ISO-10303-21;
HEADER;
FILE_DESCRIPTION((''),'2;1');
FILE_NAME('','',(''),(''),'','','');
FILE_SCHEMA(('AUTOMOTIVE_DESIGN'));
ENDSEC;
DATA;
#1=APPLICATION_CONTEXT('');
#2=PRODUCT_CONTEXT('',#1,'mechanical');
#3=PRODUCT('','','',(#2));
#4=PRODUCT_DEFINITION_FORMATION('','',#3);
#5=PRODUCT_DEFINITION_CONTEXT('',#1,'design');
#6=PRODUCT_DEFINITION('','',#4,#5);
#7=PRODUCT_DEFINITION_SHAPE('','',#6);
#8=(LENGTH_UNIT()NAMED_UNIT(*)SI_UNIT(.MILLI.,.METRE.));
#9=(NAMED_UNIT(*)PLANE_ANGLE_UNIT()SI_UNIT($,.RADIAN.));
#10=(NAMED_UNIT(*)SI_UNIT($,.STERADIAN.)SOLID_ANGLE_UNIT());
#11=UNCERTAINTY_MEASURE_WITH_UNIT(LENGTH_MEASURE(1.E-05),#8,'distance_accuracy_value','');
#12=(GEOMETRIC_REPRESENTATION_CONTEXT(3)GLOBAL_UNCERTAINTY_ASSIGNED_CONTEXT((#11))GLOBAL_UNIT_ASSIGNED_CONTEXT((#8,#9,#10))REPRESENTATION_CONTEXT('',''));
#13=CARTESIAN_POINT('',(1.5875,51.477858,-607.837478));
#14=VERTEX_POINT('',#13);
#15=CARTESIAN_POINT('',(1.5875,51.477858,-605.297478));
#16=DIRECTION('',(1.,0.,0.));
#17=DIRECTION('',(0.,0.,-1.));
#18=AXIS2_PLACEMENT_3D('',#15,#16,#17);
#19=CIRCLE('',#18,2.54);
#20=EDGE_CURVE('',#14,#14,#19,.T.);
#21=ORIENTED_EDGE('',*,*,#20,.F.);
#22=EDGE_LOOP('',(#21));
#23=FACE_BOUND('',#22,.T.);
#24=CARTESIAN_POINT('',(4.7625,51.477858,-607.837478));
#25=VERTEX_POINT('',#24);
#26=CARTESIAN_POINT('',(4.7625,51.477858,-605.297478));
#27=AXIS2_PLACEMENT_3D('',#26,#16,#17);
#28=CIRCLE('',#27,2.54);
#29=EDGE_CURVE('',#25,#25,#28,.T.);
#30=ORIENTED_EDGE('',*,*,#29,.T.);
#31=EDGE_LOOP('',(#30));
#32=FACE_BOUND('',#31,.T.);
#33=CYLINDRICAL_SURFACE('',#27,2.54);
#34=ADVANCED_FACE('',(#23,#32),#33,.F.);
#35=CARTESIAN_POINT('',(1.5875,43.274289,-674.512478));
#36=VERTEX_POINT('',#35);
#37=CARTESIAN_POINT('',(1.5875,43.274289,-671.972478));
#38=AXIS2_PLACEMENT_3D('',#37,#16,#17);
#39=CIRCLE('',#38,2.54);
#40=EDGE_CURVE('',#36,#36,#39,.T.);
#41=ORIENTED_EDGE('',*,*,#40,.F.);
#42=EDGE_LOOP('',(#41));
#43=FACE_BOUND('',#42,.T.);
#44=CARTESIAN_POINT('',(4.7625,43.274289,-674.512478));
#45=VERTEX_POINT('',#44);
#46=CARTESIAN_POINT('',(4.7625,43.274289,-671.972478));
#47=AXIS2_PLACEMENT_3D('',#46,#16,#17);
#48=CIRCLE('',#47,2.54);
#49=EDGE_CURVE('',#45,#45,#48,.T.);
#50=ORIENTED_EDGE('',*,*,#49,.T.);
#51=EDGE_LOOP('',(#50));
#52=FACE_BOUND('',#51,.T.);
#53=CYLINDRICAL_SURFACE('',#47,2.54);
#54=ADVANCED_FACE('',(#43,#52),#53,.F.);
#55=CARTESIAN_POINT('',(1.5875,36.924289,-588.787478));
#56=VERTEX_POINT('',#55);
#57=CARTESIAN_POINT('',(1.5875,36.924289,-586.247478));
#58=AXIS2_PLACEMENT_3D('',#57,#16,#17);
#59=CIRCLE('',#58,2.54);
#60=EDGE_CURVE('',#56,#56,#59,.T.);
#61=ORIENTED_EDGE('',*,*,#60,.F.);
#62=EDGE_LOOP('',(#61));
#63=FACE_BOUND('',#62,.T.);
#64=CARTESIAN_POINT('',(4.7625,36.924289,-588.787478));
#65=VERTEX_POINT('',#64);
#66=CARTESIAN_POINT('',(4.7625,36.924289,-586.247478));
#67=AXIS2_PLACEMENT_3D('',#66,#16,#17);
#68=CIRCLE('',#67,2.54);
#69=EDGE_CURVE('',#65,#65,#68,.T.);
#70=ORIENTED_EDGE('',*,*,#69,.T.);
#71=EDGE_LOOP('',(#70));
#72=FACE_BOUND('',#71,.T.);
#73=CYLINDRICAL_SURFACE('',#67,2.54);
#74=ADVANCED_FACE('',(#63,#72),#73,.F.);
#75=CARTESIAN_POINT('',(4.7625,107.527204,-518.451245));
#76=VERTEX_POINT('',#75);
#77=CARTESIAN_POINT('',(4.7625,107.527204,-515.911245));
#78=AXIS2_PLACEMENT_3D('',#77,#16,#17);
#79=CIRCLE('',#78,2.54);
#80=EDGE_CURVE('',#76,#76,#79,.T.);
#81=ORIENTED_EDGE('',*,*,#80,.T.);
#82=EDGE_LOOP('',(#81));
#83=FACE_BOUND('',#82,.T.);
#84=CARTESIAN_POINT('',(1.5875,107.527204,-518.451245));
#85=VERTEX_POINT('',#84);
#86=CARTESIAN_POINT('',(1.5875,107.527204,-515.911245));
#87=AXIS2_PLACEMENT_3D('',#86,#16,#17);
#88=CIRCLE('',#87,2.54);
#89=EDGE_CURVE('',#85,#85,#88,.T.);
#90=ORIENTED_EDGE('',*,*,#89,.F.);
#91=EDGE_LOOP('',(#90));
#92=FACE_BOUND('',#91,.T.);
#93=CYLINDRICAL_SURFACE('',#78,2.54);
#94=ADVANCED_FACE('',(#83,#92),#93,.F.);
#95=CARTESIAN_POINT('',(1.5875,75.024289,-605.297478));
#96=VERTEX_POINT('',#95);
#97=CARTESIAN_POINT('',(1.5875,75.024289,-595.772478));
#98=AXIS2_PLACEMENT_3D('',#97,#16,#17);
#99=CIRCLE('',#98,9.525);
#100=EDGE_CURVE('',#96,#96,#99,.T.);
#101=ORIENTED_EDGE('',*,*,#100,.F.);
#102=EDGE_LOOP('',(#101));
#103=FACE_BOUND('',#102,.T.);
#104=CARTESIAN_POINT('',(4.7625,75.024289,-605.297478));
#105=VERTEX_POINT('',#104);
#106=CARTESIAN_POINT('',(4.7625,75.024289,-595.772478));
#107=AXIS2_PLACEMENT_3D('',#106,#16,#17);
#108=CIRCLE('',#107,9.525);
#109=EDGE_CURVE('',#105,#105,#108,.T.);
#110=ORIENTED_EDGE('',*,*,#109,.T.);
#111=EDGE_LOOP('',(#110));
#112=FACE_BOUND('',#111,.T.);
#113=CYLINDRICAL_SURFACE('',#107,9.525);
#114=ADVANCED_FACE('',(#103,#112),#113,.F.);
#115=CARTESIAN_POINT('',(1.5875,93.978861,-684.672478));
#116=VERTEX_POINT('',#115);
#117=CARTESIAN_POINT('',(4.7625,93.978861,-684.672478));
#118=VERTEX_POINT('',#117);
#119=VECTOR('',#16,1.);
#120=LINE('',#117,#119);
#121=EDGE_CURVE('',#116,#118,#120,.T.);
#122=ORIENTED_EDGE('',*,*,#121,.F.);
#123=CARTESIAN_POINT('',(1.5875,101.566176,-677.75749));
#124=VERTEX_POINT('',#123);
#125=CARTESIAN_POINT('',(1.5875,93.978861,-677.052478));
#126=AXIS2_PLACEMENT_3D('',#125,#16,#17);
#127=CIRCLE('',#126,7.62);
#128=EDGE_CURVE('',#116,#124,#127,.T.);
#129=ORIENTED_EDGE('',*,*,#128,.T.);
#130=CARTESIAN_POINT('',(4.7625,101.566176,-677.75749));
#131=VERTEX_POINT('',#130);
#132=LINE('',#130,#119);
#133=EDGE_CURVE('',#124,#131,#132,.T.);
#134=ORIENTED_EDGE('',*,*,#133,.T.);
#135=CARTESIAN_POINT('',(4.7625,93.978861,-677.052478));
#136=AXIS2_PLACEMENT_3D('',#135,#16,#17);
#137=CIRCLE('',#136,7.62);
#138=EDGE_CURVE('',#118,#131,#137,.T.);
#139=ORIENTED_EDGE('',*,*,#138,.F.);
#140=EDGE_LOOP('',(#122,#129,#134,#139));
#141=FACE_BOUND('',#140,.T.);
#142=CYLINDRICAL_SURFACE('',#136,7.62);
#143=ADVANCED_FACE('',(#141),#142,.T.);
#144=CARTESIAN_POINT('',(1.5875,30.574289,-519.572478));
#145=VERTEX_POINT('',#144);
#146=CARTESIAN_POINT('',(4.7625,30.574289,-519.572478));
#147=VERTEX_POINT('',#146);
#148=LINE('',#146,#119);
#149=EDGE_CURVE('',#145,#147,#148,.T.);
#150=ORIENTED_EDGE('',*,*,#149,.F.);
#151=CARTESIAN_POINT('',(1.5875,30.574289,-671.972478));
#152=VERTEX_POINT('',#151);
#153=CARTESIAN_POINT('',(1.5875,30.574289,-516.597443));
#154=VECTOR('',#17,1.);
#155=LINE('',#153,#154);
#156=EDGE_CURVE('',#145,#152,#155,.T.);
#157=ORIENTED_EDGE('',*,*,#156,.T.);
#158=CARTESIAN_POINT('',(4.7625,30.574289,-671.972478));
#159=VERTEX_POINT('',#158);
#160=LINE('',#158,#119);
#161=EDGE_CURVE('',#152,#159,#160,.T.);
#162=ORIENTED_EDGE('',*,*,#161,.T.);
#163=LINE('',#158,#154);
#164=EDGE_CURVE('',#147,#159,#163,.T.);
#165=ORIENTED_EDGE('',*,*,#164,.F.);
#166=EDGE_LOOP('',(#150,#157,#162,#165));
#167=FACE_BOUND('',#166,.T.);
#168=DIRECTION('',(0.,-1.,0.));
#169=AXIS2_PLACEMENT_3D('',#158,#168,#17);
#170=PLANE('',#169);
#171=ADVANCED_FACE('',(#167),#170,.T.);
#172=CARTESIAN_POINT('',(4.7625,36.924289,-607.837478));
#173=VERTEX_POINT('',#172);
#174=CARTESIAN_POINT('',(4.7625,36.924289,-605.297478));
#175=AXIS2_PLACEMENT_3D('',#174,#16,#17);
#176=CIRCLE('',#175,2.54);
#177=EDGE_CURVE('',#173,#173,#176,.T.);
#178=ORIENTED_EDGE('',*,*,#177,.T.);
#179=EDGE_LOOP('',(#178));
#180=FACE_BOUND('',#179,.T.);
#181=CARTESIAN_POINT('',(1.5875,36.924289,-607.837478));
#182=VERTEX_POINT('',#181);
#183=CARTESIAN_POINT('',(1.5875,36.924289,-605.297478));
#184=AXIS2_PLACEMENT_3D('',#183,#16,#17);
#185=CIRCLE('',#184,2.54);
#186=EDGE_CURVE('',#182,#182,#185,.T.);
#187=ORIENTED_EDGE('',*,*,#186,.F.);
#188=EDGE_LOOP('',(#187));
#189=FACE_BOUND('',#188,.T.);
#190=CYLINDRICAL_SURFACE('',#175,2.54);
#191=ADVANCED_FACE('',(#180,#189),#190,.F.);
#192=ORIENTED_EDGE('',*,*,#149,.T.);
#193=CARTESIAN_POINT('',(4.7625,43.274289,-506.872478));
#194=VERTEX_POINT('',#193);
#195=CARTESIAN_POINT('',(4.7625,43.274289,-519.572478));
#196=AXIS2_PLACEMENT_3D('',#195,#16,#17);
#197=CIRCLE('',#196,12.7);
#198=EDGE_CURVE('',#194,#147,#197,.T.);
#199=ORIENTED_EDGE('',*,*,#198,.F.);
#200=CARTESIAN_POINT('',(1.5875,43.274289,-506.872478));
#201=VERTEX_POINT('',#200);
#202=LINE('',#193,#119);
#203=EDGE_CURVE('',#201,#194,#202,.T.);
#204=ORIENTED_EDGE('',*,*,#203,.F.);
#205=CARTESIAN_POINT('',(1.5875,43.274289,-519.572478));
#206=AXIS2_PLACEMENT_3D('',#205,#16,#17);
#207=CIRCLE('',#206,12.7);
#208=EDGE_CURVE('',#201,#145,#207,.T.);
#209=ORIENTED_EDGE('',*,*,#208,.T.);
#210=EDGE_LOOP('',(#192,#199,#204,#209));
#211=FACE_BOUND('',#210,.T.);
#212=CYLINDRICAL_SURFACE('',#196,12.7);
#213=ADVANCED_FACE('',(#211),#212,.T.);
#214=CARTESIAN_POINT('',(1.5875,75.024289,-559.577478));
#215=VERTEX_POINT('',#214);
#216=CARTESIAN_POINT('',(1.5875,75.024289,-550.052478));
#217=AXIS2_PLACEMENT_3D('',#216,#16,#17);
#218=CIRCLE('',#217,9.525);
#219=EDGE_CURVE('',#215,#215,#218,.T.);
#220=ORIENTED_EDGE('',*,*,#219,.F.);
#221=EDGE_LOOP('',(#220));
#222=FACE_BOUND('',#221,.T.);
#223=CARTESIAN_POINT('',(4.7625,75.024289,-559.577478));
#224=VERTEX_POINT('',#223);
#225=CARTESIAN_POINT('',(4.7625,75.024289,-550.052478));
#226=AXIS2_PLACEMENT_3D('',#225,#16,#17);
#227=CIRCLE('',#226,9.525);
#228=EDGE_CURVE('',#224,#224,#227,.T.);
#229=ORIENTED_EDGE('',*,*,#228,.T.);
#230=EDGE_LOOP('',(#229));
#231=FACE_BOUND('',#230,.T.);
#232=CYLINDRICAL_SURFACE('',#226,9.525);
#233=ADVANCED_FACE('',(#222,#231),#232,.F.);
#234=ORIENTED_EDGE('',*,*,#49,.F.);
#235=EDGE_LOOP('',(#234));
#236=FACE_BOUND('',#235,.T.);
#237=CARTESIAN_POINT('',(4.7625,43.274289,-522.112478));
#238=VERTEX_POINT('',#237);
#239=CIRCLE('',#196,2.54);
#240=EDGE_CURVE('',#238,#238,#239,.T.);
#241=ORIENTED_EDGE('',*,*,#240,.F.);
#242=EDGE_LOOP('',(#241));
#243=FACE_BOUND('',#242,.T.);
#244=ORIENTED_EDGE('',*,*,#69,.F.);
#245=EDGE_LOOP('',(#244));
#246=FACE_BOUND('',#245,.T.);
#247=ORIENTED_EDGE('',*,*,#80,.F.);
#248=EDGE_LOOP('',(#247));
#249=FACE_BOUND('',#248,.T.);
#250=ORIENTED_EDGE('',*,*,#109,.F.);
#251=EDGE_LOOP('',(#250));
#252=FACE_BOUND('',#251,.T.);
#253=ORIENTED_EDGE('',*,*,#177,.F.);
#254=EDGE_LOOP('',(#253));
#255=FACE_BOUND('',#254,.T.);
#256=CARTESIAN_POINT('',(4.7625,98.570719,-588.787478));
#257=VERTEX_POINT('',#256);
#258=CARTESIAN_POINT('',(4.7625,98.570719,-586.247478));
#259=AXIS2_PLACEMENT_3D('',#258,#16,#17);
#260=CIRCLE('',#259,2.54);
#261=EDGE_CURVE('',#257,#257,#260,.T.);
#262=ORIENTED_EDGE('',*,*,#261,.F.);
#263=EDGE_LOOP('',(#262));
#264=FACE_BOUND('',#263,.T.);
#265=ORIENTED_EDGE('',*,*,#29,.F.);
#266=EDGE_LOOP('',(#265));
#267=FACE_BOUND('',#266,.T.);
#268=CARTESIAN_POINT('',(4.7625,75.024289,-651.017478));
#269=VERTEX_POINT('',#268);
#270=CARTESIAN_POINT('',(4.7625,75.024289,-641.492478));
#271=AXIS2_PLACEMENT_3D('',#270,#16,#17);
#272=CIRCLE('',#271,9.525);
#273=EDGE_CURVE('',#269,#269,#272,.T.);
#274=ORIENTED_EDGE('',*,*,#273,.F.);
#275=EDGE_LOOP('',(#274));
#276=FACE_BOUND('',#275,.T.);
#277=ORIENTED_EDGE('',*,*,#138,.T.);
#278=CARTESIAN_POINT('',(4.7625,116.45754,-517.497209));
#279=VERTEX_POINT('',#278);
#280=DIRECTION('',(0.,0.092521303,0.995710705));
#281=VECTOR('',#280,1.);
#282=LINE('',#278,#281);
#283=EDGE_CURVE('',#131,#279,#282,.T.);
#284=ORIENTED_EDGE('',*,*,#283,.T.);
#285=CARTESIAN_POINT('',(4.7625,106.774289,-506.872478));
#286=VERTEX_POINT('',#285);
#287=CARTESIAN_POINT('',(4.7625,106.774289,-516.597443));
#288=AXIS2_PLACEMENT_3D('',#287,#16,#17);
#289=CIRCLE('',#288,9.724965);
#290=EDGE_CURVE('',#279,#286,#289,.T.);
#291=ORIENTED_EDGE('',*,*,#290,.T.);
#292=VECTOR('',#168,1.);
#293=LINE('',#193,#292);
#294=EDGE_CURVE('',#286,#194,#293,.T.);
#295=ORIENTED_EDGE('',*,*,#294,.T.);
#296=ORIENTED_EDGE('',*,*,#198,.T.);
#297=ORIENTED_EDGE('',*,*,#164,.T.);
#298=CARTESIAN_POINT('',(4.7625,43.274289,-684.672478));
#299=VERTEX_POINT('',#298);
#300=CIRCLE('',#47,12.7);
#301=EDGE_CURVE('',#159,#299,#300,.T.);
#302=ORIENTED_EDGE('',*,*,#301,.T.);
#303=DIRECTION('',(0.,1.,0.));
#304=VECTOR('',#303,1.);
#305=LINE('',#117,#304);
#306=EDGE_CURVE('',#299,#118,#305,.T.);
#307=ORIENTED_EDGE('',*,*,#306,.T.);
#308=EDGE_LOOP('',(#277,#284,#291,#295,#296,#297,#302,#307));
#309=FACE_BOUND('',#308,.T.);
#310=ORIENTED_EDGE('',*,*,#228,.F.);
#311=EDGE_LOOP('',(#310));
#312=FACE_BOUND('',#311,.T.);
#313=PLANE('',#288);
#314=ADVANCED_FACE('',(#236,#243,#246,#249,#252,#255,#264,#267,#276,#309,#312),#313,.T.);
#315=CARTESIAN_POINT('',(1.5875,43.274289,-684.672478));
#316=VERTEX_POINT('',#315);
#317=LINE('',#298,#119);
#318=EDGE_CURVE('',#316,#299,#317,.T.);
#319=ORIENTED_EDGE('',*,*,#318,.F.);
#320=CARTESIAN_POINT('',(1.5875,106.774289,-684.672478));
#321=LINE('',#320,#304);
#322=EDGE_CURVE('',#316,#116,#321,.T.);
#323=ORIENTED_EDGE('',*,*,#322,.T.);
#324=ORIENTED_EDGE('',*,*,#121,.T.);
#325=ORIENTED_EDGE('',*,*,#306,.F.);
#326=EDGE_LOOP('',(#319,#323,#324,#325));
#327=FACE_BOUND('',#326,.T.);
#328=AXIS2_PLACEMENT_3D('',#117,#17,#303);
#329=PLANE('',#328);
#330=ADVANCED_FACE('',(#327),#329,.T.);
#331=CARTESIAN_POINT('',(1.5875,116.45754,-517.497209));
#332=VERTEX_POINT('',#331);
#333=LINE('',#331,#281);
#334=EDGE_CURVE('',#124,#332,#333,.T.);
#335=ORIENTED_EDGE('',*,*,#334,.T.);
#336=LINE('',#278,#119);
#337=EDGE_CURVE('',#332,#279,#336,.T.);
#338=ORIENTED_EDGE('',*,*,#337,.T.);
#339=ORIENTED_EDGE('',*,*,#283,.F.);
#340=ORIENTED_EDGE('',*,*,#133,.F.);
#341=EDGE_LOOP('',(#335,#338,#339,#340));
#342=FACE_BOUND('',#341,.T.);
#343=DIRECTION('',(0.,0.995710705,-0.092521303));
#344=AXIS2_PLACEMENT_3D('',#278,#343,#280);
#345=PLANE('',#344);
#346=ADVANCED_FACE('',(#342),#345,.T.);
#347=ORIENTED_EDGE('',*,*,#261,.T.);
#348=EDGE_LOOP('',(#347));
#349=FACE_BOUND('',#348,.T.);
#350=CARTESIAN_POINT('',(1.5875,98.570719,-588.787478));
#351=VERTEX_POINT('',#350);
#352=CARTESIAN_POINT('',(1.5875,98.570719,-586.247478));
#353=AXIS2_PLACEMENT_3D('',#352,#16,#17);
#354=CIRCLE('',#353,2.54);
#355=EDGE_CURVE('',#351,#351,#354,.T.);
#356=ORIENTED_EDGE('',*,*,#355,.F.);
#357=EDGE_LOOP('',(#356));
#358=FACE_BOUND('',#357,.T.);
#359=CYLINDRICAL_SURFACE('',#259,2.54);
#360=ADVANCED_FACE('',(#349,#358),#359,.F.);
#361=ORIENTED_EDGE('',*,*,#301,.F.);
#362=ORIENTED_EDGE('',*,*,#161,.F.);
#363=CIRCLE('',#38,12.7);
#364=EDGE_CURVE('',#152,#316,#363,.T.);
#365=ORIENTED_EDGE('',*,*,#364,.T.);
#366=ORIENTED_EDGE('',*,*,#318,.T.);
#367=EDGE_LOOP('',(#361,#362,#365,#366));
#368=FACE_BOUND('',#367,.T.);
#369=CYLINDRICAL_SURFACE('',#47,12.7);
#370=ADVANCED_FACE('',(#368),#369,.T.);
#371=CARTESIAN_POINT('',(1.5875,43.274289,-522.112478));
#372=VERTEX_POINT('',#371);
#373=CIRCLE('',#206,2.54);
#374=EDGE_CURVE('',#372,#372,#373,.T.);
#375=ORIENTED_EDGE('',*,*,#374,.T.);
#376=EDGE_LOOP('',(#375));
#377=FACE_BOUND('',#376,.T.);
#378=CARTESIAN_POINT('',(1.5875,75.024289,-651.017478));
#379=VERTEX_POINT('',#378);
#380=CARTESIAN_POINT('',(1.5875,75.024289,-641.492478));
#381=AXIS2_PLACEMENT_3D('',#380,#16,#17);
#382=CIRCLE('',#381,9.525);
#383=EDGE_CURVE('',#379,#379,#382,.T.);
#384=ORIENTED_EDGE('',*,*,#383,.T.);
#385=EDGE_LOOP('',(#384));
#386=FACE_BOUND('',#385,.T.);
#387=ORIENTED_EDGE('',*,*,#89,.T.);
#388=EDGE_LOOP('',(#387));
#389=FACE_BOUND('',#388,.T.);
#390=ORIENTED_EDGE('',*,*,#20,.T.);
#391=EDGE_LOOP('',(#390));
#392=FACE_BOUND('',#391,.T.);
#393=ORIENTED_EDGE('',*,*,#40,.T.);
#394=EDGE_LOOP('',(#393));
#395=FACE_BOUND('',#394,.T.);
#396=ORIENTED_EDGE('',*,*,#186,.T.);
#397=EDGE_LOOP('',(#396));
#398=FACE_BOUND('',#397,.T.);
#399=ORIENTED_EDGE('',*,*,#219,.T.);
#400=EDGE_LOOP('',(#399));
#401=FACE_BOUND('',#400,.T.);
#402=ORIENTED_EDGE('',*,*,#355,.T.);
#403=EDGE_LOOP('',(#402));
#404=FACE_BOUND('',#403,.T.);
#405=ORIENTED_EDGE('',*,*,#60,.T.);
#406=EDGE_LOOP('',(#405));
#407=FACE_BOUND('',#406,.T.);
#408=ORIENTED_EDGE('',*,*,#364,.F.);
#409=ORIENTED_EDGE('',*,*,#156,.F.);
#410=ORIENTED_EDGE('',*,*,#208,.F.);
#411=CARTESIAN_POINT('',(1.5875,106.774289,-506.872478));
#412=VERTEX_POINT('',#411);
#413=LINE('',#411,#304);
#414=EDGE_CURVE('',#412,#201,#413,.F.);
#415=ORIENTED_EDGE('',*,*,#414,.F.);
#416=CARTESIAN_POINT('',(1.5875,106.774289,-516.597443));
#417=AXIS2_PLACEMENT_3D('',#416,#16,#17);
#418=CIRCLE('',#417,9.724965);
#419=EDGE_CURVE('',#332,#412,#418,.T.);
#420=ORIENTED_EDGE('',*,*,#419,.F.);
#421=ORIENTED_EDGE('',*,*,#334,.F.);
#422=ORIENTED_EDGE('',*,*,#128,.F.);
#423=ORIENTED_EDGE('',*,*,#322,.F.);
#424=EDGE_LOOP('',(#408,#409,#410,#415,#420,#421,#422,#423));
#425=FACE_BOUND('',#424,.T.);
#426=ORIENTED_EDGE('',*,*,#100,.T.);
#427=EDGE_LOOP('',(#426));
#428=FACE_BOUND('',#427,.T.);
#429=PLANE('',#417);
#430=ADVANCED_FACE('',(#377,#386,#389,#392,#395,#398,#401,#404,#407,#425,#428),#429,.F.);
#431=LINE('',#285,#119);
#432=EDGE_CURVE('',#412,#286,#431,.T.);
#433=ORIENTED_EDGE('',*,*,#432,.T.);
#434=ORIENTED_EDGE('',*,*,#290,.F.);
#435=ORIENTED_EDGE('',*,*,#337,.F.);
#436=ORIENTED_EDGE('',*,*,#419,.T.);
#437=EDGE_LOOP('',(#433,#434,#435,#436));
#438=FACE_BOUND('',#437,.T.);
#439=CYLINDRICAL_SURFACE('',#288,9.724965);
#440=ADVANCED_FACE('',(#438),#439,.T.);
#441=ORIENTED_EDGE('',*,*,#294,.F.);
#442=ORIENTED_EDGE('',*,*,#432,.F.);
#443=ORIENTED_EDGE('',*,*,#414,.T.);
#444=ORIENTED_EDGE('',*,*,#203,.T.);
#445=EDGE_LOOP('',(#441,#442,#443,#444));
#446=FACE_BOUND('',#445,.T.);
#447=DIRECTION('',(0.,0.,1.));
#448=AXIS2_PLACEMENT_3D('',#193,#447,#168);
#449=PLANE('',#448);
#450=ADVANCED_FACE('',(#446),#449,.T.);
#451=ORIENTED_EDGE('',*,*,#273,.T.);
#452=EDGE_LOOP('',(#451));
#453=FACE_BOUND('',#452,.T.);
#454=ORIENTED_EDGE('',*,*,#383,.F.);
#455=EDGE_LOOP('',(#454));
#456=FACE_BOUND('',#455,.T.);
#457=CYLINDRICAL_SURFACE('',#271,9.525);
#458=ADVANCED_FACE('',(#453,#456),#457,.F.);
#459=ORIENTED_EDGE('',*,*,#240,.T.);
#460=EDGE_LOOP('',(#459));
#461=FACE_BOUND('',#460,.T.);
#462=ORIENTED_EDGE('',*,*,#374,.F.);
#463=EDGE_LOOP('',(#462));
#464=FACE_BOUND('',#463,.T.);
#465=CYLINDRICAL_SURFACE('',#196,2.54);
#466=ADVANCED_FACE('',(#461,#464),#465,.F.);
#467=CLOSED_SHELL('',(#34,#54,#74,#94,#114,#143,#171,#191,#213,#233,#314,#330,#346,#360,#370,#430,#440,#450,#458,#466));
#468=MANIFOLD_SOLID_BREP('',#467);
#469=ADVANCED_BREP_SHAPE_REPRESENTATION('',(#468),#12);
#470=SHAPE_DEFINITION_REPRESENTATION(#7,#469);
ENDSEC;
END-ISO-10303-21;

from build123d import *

# Parameters (mm, degrees)
SKETCH1_R                  = 2.54
SKETCH1_R_2                = 9.525
BOSS_EXTRUDE1_DEPTH        = 4.7625
CONVERT_SOLID1_OUTLINE_R   = 2.54
CONVERT_SOLID1_OUTLINE_R_2 = 9.525
CONVERT_SOLID1_DEPTH       = 1.5875


# Read off the part's stored shape, not the designer's step: Convert-Solid1
with BuildPart() as part:
    # Sketch1 → Boss-Extrude1 (new body)
    with BuildSketch(Plane(origin=(0, 0, 0), x_dir=(0, 0, -1), z_dir=(1, 0, 0))):
        with BuildLine():
            Line((517.497208961, 116.457539853), (677.757490375, 101.56617639))
            ThreePointArc((677.757490375, 101.56617639), (682.684377991, 99.111706327), (684.672478048, 93.978860817))
            Line((684.672478048, 93.978860817), (684.672478048, 43.274288567))
            ThreePointArc((684.672478048, 43.274288567), (680.952734169, 34.294032445), (671.972478048, 30.574288567))
            Line((671.972478048, 30.574288567), (519.572478048, 30.574288567))
            ThreePointArc((519.572478048, 30.574288567), (510.592221927, 34.294032445), (506.872478048, 43.274288567))
            Line((506.872478048, 43.274288567), (506.872478048, 106.774288567))
            ThreePointArc((506.872478048, 106.774288567), (510.046689227, 113.961956173), (517.497208961, 116.457539853))
        make_face()
        with Locations(Location((515.911244675, 107.527203865, 0), (0, 0, 180))):
            Circle(SKETCH1_R, mode=Mode.SUBTRACT)
        with Locations(Location((550.052478048, 75.024288567, 0), (0, 0, 180))):
            Circle(SKETCH1_R_2, mode=Mode.SUBTRACT)
        with Locations(Location((595.772478048, 75.024288567, 0), (0, 0, 180))):
            Circle(SKETCH1_R_2, mode=Mode.SUBTRACT)
        with Locations(Location((605.297478048, 51.47785837, 0), (0, 0, 180))):
            Circle(SKETCH1_R, mode=Mode.SUBTRACT)
        with Locations(Location((586.247478048, 98.570718763, 0), (0, 0, 180))):
            Circle(SKETCH1_R, mode=Mode.SUBTRACT)
        with Locations(Location((641.492478048, 75.024288567, 0), (0, 0, 180))):
            Circle(SKETCH1_R_2, mode=Mode.SUBTRACT)
        with Locations(Location((605.297478048, 36.924288567, 0), (0, 0, 180))):
            Circle(SKETCH1_R, mode=Mode.SUBTRACT)
        with Locations(Location((586.247478048, 36.924288567, 0), (0, 0, 180))):
            Circle(SKETCH1_R, mode=Mode.SUBTRACT)
        with Locations(Location((519.572478048, 43.274288567, 0), (0, 0, 180))):
            Circle(SKETCH1_R, mode=Mode.SUBTRACT)
        with Locations(Location((671.972478048, 43.274288567, 0), (0, 0, 180))):
            Circle(SKETCH1_R, mode=Mode.SUBTRACT)
    extrude(amount=BOSS_EXTRUDE1_DEPTH)

    # Convert-Solid1 outline → Convert-Solid1 (cut)
    with BuildSketch(Plane.YZ):
        with BuildLine():
            ThreePointArc((116.457539853, -517.497208961), (113.961956173, -510.046689227), (106.774288567, -506.872478048))
            Line((106.774288567, -506.872478048), (43.274288567, -506.872478048))
            ThreePointArc((43.274288567, -506.872478048), (34.294032446, -510.592221927), (30.574288567, -519.572478048))
            Line((30.574288567, -519.572478048), (30.574288567, -671.972478048))
            ThreePointArc((30.574288567, -671.972478048), (34.294032445, -680.952734169), (43.274288567, -684.672478048))
            Line((43.274288567, -684.672478048), (93.978860817, -684.672478048))
            ThreePointArc((93.978860817, -684.672478048), (99.111706327, -682.684377991), (101.56617639, -677.757490375))
            Line((101.56617639, -677.757490375), (116.457539853, -517.497208961))
        make_face()
        with Locations((43.274288567, -671.972478048)):
            Circle(CONVERT_SOLID1_OUTLINE_R, mode=Mode.SUBTRACT)
        with Locations((36.924288567, -605.297478048)):
            Circle(CONVERT_SOLID1_OUTLINE_R, mode=Mode.SUBTRACT)
        with Locations((51.47785837, -605.297478048)):
            Circle(CONVERT_SOLID1_OUTLINE_R, mode=Mode.SUBTRACT)
        with Locations((75.024288567, -641.492478048)):
            Circle(CONVERT_SOLID1_OUTLINE_R_2, mode=Mode.SUBTRACT)
        with Locations((75.024288567, -595.772478048)):
            Circle(CONVERT_SOLID1_OUTLINE_R_2, mode=Mode.SUBTRACT)
        with Locations((36.924288567, -586.247478048)):
            Circle(CONVERT_SOLID1_OUTLINE_R, mode=Mode.SUBTRACT)
        with Locations((43.274288567, -519.572478048)):
            Circle(CONVERT_SOLID1_OUTLINE_R, mode=Mode.SUBTRACT)
        with Locations((98.570718763, -586.247478048)):
            Circle(CONVERT_SOLID1_OUTLINE_R, mode=Mode.SUBTRACT)
        with Locations((75.024288567, -550.052478048)):
            Circle(CONVERT_SOLID1_OUTLINE_R_2, mode=Mode.SUBTRACT)
        with Locations((107.527203865, -515.911244675)):
            Circle(CONVERT_SOLID1_OUTLINE_R, mode=Mode.SUBTRACT)
    extrude(amount=CONVERT_SOLID1_DEPTH, mode=Mode.SUBTRACT)


solid = part.part
